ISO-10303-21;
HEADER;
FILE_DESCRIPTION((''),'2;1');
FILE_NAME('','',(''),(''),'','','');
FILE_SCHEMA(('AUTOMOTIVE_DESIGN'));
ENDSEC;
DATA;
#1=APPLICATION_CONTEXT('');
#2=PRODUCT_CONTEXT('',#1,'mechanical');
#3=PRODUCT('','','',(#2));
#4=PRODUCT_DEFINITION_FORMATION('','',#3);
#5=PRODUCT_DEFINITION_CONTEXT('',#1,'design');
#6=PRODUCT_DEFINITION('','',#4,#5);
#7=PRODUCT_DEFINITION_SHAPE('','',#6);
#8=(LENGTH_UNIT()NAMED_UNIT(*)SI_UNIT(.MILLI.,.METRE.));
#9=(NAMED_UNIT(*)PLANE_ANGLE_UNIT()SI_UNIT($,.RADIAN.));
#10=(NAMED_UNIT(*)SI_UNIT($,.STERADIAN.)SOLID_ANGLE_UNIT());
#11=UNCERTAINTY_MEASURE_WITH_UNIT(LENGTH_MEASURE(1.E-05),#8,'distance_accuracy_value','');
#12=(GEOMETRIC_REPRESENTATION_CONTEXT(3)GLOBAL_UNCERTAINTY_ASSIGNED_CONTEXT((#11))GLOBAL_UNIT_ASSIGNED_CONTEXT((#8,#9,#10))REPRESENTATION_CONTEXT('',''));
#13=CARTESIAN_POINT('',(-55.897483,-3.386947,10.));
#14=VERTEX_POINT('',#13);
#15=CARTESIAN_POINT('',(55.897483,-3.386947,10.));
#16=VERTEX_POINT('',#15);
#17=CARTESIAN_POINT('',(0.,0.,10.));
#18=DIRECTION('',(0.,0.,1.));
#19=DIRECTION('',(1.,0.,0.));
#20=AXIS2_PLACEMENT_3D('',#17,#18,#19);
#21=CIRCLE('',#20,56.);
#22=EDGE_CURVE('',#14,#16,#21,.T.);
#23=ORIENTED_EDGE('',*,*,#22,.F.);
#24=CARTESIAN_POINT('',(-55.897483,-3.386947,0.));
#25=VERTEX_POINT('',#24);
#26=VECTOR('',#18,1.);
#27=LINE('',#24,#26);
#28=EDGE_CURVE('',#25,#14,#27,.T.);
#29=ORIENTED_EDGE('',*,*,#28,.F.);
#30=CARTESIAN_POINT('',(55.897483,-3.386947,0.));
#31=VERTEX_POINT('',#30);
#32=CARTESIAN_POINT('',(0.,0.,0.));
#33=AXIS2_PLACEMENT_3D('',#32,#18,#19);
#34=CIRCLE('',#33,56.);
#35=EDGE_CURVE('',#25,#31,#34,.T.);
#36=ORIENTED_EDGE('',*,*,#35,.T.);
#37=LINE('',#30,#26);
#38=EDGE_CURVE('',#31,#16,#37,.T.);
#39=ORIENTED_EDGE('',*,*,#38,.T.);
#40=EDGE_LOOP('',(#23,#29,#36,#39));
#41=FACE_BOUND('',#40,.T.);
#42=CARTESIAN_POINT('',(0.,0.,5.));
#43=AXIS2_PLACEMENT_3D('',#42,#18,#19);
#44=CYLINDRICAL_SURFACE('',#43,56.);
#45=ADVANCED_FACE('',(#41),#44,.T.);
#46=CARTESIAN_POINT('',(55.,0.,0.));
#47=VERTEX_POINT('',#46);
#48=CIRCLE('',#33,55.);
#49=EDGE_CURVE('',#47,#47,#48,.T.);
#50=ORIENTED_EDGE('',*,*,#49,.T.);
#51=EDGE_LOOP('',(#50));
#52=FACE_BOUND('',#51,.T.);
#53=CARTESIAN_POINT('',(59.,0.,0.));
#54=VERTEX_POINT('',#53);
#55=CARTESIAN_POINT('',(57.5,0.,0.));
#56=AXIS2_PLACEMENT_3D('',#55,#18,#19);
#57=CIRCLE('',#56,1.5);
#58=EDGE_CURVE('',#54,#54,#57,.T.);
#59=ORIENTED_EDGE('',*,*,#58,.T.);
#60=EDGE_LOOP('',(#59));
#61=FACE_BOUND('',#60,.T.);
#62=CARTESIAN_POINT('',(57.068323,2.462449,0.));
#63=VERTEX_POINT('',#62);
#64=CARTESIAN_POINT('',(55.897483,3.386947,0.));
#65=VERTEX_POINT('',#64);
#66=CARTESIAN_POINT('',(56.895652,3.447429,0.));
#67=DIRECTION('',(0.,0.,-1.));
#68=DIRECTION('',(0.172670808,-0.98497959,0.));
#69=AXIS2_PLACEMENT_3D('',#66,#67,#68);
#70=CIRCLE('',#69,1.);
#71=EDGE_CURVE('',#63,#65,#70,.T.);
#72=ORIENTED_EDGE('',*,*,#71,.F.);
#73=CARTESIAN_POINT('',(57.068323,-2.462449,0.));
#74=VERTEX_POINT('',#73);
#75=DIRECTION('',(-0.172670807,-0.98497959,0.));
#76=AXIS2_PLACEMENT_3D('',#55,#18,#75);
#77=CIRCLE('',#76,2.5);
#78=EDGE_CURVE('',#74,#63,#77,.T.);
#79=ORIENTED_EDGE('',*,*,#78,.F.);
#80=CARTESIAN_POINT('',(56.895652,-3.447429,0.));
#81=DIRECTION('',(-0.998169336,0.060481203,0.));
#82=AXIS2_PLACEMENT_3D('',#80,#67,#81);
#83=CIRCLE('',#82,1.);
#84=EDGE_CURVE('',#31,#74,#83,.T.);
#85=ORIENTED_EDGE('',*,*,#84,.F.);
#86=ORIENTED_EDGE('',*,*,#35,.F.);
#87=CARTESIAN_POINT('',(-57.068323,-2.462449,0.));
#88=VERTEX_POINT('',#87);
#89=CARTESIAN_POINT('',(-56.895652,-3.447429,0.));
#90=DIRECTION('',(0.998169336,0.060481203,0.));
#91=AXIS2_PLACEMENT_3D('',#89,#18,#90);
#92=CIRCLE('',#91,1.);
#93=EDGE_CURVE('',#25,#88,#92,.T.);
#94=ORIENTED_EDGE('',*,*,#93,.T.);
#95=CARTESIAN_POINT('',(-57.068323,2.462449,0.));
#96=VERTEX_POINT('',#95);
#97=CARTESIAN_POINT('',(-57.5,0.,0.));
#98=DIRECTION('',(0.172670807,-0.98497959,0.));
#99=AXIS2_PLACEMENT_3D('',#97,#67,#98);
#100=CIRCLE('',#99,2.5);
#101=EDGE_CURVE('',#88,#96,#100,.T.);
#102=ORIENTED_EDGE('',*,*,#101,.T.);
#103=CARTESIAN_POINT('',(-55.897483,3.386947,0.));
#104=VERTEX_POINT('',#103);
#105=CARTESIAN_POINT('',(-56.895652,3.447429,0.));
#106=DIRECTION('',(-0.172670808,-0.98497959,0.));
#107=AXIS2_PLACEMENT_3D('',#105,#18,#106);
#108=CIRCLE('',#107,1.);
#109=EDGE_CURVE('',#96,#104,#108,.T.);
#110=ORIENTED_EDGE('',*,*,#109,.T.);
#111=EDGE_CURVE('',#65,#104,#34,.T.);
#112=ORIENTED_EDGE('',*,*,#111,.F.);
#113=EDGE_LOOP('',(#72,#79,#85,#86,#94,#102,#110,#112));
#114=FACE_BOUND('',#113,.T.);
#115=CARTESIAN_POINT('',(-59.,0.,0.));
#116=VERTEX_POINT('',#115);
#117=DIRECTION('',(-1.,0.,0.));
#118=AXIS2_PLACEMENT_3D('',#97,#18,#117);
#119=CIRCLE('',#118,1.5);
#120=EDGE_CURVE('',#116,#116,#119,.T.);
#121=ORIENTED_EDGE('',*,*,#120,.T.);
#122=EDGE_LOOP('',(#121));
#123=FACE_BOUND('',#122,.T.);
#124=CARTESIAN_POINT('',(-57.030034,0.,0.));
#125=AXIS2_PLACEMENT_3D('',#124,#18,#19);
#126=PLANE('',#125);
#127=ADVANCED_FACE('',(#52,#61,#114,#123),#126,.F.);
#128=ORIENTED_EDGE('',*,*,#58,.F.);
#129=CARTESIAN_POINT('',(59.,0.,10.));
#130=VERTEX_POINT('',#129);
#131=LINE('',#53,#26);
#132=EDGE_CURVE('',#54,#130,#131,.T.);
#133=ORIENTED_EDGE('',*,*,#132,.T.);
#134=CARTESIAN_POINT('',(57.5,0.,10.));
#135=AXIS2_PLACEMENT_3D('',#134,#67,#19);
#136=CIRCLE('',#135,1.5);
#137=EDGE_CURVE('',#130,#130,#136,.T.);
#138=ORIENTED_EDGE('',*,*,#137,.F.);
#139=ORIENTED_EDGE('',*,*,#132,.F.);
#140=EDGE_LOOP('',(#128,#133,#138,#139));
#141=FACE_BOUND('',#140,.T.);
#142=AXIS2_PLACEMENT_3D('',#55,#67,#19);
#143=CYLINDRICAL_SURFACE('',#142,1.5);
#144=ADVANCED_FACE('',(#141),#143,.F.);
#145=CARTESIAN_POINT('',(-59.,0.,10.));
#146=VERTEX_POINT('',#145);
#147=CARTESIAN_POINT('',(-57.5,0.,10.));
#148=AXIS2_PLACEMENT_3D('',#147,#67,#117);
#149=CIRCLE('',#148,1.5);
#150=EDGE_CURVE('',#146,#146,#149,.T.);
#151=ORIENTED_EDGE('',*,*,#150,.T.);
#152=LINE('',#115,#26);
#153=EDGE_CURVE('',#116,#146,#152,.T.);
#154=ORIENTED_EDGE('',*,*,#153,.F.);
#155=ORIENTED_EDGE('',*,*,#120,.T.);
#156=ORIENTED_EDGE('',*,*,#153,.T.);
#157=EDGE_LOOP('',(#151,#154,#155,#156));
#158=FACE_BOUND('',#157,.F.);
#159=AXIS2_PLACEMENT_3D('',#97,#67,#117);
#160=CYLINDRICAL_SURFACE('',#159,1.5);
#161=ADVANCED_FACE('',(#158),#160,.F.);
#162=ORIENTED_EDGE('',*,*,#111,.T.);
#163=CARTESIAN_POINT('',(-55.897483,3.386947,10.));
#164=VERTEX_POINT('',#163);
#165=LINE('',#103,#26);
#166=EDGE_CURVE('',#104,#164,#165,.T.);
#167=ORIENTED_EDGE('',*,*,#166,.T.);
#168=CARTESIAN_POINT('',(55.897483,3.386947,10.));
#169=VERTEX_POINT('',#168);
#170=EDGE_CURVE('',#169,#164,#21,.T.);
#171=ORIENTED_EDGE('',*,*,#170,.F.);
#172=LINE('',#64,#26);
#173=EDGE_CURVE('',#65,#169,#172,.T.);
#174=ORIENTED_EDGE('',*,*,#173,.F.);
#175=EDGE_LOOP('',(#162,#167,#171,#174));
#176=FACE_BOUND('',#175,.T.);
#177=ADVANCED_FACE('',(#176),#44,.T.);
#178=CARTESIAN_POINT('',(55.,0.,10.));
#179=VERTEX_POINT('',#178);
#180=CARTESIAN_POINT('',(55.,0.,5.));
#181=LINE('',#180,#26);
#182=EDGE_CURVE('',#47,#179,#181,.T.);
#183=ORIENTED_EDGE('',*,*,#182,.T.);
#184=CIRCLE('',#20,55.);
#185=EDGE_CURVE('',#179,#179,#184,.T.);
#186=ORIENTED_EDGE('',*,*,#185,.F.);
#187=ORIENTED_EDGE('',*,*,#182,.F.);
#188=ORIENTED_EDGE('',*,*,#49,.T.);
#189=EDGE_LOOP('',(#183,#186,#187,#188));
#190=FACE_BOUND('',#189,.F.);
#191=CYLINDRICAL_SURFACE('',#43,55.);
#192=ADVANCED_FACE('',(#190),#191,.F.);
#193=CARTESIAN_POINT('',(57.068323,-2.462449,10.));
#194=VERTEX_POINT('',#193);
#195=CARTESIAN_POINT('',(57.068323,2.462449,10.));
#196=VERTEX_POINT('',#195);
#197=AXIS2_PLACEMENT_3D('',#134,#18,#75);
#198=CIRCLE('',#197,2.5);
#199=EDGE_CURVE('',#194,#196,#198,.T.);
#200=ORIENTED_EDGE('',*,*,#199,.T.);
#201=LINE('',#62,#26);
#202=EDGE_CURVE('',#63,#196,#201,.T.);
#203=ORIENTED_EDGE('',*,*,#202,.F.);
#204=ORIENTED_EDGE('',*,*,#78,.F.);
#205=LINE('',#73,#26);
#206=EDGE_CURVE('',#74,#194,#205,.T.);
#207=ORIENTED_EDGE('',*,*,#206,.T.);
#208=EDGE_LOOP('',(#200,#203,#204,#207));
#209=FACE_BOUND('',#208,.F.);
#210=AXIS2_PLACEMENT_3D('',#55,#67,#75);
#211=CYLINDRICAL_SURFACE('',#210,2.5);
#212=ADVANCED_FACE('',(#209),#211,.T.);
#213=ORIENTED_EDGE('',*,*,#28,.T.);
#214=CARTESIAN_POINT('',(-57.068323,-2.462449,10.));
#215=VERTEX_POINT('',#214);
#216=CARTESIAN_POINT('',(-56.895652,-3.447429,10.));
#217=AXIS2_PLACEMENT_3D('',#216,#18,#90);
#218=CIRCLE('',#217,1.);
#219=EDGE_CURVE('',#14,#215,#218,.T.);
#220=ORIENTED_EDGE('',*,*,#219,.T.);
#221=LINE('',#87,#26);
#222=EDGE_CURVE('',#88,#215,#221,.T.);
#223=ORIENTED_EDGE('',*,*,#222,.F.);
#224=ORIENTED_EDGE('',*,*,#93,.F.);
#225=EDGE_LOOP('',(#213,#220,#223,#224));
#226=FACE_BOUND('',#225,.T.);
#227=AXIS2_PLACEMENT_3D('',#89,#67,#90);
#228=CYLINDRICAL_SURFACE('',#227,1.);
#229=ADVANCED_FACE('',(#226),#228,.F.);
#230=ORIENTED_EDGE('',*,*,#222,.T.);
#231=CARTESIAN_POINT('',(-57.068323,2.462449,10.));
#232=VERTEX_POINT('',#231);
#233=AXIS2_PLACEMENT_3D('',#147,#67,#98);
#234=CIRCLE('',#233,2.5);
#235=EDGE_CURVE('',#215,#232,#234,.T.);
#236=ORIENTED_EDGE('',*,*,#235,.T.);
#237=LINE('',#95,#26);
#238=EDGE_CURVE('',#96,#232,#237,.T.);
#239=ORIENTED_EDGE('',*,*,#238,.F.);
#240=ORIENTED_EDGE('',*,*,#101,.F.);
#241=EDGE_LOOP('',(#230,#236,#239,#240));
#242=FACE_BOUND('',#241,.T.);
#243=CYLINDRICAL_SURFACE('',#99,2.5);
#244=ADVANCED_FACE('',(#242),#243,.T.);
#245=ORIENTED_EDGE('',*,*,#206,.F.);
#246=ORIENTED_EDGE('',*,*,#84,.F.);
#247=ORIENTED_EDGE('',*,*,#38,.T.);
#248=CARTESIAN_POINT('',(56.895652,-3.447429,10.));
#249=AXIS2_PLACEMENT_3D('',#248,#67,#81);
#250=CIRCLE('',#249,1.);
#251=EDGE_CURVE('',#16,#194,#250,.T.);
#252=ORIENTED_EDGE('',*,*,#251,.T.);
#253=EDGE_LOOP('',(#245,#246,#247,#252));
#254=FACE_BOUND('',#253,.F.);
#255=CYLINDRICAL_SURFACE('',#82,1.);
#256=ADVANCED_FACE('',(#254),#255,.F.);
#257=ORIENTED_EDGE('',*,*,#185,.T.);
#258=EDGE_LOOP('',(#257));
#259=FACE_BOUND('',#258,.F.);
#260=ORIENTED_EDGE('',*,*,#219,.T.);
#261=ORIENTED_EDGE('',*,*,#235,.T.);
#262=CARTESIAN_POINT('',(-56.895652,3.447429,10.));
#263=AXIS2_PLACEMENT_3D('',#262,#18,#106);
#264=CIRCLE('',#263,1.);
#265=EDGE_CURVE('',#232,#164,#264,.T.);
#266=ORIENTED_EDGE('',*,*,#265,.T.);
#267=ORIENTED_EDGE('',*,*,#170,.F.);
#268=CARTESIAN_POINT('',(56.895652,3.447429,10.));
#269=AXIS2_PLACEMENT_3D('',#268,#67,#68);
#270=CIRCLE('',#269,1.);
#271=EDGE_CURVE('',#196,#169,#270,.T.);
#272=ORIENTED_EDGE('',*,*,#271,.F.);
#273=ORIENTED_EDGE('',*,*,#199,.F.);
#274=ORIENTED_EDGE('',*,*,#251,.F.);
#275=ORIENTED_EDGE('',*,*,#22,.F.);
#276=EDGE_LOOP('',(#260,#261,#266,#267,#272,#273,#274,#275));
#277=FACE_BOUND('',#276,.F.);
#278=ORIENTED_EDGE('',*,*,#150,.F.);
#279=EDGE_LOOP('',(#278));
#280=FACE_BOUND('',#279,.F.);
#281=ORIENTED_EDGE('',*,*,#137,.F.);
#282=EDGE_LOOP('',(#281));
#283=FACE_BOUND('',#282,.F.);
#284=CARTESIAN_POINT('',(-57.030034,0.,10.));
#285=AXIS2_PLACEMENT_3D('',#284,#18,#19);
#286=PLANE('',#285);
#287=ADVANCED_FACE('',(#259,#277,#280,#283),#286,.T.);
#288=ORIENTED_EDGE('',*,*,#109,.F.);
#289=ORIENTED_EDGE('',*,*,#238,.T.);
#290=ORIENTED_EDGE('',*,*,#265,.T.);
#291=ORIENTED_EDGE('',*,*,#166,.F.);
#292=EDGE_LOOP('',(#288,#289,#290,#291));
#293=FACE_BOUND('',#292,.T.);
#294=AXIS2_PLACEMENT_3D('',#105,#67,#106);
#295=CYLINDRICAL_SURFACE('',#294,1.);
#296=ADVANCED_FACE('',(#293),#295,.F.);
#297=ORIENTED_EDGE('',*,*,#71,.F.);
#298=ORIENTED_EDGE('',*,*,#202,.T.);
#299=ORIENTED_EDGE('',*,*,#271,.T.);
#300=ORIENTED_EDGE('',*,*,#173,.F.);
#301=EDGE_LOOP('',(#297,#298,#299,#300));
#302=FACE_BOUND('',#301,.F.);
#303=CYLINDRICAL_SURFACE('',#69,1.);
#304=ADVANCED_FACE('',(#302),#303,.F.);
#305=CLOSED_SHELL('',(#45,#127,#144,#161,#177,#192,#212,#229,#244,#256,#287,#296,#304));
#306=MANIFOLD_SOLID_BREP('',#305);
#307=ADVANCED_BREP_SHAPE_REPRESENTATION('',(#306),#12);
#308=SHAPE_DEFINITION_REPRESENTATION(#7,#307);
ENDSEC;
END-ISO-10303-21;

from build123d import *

# Parameters (mm, degrees)
F0_W     = 1
F0_H     = 10
F2_R     = 1.5
F3_DEPTH = 10


# Not quite as in the source:
# - a pattern or mirror of a feature is missing from the dataset's text; its kind, count and spacing are read off the source's solid


with BuildPart() as f1:
    # F0 (on Front) → F1 (revolve)
    with BuildSketch(Plane.XZ):
        with Locations((55.5, 5)):
            Rectangle(F0_W, F0_H)
    revolve(axis=Axis((0, 0, 25.0742025673), (0, 0, 1)))

    # F2 (on Top) → F3 (join)
    with BuildSketch(Plane.XY):
        with BuildLine():
            ThreePointArc((55.8974828375, -3.3869473613), (56.2759455722, -2.6625949972), (57.0683229814, -2.4624489744))
            ThreePointArc((57.0683229814, -2.4624489744), (60, 0), (57.0683229814, 2.4624489744))
            ThreePointArc((57.0683229814, 2.4624489744), (56.2759455722, 2.6625949972), (55.8974828375, 3.3869473613))
            Line((55.8974828375, 3.3869473613), (55.3983981693, 3.3567067599))
            ThreePointArc((55.3983981693, 3.3567067599), (55.5, 0), (55.3983981693, -3.3567067599))
            Line((55.3983981693, -3.3567067599), (55.8974828375, -3.3869473613))
        make_face()
        with Locations((57.5, 0)):
            Circle(F2_R, mode=Mode.SUBTRACT)
    f3 = extrude(amount=F3_DEPTH)

    # F3_copies: F3 across plane
    add(f3.mirror(Plane(origin=(0, 0, 0), x_dir=(0, 0, -1), z_dir=(-1, 0, 0))))


solid = f1.part
